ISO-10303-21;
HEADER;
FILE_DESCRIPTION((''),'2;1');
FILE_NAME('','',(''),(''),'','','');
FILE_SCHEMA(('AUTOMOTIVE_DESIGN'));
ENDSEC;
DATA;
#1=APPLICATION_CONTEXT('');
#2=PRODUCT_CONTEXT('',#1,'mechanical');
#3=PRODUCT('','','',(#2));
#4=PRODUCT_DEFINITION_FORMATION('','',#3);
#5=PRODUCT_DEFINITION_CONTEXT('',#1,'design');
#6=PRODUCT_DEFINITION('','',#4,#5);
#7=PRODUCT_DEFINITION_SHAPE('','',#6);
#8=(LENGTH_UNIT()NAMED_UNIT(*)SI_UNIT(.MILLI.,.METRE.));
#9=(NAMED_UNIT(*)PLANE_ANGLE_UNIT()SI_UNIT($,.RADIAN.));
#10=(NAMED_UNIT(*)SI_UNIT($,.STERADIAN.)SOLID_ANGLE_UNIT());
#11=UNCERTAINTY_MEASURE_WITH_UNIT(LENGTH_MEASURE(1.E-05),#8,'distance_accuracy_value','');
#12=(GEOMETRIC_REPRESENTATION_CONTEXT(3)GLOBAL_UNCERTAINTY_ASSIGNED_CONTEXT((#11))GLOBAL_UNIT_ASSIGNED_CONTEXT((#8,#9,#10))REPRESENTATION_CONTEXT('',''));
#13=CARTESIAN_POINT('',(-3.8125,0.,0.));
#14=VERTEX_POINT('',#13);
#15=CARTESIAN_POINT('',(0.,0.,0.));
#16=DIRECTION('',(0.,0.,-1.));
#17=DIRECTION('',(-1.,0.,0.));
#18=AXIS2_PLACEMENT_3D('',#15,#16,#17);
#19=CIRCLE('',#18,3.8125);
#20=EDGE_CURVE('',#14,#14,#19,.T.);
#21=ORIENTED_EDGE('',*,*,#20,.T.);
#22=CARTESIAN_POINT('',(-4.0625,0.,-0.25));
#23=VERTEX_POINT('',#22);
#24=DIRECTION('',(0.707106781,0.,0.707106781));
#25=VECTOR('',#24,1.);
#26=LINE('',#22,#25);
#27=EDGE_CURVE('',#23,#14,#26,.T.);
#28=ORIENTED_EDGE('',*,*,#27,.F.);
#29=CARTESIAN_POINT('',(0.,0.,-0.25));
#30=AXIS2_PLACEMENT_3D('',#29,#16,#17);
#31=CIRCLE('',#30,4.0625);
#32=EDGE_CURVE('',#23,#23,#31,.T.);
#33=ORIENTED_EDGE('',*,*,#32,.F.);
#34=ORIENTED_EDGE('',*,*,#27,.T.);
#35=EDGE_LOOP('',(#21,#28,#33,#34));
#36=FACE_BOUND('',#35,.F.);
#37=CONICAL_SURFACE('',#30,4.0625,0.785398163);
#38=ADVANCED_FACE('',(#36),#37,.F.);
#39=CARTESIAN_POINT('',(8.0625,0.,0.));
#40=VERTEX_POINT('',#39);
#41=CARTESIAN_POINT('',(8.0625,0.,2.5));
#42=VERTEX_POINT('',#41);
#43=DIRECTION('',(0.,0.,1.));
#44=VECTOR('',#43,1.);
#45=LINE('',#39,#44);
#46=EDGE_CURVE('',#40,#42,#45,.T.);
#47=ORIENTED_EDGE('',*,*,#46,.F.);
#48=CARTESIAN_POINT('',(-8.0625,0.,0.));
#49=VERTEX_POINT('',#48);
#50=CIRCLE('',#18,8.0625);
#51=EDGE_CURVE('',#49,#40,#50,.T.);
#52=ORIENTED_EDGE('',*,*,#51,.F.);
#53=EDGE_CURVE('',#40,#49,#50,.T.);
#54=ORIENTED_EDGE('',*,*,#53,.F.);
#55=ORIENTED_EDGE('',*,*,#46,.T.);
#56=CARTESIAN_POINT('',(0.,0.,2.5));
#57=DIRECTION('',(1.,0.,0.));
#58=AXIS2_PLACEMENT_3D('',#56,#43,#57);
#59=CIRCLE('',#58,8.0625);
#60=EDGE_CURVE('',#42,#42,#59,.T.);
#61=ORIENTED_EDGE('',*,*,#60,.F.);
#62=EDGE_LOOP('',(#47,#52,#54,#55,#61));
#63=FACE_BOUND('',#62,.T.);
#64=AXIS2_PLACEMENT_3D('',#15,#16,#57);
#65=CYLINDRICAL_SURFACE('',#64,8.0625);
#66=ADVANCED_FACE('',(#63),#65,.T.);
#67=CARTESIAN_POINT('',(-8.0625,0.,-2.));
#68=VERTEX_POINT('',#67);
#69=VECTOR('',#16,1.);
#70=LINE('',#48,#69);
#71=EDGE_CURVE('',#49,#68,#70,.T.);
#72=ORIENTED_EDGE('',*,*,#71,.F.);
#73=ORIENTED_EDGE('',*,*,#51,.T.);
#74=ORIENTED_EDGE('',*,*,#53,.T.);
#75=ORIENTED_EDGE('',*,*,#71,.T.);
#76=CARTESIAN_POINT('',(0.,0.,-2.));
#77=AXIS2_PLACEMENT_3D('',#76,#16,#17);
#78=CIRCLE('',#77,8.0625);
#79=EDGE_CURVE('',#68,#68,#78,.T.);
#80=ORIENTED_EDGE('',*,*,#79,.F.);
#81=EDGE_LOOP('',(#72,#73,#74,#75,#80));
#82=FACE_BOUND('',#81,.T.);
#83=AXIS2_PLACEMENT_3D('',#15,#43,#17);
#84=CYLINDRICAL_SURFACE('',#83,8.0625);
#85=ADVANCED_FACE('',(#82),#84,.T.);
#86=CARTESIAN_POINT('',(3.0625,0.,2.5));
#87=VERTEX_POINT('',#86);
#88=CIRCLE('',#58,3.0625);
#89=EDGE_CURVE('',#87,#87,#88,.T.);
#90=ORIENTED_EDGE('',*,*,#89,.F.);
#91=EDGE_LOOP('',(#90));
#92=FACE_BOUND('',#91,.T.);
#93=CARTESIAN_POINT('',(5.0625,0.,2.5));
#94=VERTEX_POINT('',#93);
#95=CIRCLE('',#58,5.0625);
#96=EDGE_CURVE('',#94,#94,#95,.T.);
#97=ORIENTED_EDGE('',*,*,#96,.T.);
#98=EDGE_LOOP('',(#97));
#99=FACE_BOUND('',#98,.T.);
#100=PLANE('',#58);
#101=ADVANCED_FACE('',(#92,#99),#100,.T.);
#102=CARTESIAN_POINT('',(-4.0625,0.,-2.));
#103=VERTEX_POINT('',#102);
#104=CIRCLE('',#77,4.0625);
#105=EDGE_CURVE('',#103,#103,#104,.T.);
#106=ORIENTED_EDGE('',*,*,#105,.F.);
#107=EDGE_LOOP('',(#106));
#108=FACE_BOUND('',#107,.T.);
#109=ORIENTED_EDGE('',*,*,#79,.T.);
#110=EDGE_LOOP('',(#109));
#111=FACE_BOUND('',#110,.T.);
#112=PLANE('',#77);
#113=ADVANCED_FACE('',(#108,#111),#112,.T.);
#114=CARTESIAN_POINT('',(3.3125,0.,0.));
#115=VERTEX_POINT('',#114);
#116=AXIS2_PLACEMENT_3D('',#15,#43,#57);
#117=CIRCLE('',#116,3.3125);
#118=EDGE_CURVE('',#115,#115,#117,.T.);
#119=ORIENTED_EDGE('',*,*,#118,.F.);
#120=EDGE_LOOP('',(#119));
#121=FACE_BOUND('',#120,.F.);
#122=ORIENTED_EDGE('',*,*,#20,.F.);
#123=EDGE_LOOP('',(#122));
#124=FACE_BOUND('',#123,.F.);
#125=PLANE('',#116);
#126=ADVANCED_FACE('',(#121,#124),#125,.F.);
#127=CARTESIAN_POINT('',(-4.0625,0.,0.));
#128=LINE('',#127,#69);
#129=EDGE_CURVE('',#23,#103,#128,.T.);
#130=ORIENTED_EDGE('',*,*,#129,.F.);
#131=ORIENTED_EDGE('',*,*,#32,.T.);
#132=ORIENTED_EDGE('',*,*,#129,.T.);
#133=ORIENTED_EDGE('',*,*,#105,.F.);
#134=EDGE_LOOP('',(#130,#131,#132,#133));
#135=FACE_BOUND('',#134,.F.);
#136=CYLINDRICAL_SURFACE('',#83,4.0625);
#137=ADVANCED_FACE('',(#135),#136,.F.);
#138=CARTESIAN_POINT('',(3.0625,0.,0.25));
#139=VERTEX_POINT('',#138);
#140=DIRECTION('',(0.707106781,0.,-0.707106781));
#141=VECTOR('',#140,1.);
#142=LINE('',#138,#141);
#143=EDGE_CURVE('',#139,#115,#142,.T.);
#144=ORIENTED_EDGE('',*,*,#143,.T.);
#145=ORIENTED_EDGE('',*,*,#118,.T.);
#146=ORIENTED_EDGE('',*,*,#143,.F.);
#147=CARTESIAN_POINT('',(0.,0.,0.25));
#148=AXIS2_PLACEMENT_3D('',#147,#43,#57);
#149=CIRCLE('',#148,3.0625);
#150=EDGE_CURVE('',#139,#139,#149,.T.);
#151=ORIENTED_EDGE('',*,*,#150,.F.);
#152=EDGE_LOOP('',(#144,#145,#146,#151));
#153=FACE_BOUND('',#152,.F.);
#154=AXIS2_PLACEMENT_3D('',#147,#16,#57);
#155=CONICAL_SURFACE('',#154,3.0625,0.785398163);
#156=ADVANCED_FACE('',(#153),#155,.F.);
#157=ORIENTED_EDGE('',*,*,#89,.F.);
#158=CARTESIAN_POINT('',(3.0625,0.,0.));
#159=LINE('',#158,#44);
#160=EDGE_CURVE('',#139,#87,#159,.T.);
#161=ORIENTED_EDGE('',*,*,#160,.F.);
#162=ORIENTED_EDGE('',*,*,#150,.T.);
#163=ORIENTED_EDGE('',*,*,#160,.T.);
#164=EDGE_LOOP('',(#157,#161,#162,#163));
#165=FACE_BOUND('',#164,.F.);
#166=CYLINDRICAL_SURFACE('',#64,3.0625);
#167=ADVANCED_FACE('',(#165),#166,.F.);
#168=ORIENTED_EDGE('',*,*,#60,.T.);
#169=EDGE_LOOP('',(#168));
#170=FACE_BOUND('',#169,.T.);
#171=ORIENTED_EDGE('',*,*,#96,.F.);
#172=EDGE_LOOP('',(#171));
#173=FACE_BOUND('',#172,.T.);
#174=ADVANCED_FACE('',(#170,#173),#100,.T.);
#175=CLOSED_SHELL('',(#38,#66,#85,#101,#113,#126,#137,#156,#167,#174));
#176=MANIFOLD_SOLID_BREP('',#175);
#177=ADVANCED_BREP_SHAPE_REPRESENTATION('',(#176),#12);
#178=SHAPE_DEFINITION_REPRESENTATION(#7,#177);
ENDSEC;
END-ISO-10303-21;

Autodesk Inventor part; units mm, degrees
ref_plane "YZ Plane" through (0, 0, 0) normal (1, 0, 0) x (0, 1, 0)
ref_plane "XZ Plane" through (0, 0, 0) normal (0, 1, 0) x (-1, 0, 0)
ref_plane "XY Plane" through (0, 0, 0) normal (0, 0, 1) x (1, 0, 0)
sketch "Sketch1" plane through (0, 0, 0) normal (0, 0, 1) x (1, 0, 0)
  circle A0 centre (0, 0) radius 3.0625
  circle A1 centre (0, 0) radius 5.0625
  dimension "d0" = 6.125
  dimension "d1" = 2
extrude "Extrusion1" add sketch "Sketch1" along normal blind 2.5
sketch "Sketch2" plane through (0, 0, 0) normal (0, 0, -1) x (-1, 0, 0)
  circle A0 centre (0, 0) radius 5.0625 projected
  circle A1 centre (0, 0) radius 4.0625
  circle A2 centre (0, 0) radius 8.0625
  dimension "d4" = 8.125
  dimension "d5" = 4
extrude "Extrusion2" add sketch "Sketch2" along normal blind 2 contours A0 | A2
sketch "Sketch3" plane through (0, 0, 0) normal (0, 0, 1) x (1, 0, 0)
  circle A0 centre (0, 0) radius 8.0625 projected
  circle A1 centre (0, 0) radius 5.0625 projected
extrude "Extrusion3" add sketch "Sketch3" along normal up to surface (2.5 mm away)
chamfer "Chamfer1" distance 0.25 angle 45 2 edges at (4.0625, 0, 0) (-3.0625, 0, 0)
properties part number "ArmBaseEncoderAlignmentFlange"
